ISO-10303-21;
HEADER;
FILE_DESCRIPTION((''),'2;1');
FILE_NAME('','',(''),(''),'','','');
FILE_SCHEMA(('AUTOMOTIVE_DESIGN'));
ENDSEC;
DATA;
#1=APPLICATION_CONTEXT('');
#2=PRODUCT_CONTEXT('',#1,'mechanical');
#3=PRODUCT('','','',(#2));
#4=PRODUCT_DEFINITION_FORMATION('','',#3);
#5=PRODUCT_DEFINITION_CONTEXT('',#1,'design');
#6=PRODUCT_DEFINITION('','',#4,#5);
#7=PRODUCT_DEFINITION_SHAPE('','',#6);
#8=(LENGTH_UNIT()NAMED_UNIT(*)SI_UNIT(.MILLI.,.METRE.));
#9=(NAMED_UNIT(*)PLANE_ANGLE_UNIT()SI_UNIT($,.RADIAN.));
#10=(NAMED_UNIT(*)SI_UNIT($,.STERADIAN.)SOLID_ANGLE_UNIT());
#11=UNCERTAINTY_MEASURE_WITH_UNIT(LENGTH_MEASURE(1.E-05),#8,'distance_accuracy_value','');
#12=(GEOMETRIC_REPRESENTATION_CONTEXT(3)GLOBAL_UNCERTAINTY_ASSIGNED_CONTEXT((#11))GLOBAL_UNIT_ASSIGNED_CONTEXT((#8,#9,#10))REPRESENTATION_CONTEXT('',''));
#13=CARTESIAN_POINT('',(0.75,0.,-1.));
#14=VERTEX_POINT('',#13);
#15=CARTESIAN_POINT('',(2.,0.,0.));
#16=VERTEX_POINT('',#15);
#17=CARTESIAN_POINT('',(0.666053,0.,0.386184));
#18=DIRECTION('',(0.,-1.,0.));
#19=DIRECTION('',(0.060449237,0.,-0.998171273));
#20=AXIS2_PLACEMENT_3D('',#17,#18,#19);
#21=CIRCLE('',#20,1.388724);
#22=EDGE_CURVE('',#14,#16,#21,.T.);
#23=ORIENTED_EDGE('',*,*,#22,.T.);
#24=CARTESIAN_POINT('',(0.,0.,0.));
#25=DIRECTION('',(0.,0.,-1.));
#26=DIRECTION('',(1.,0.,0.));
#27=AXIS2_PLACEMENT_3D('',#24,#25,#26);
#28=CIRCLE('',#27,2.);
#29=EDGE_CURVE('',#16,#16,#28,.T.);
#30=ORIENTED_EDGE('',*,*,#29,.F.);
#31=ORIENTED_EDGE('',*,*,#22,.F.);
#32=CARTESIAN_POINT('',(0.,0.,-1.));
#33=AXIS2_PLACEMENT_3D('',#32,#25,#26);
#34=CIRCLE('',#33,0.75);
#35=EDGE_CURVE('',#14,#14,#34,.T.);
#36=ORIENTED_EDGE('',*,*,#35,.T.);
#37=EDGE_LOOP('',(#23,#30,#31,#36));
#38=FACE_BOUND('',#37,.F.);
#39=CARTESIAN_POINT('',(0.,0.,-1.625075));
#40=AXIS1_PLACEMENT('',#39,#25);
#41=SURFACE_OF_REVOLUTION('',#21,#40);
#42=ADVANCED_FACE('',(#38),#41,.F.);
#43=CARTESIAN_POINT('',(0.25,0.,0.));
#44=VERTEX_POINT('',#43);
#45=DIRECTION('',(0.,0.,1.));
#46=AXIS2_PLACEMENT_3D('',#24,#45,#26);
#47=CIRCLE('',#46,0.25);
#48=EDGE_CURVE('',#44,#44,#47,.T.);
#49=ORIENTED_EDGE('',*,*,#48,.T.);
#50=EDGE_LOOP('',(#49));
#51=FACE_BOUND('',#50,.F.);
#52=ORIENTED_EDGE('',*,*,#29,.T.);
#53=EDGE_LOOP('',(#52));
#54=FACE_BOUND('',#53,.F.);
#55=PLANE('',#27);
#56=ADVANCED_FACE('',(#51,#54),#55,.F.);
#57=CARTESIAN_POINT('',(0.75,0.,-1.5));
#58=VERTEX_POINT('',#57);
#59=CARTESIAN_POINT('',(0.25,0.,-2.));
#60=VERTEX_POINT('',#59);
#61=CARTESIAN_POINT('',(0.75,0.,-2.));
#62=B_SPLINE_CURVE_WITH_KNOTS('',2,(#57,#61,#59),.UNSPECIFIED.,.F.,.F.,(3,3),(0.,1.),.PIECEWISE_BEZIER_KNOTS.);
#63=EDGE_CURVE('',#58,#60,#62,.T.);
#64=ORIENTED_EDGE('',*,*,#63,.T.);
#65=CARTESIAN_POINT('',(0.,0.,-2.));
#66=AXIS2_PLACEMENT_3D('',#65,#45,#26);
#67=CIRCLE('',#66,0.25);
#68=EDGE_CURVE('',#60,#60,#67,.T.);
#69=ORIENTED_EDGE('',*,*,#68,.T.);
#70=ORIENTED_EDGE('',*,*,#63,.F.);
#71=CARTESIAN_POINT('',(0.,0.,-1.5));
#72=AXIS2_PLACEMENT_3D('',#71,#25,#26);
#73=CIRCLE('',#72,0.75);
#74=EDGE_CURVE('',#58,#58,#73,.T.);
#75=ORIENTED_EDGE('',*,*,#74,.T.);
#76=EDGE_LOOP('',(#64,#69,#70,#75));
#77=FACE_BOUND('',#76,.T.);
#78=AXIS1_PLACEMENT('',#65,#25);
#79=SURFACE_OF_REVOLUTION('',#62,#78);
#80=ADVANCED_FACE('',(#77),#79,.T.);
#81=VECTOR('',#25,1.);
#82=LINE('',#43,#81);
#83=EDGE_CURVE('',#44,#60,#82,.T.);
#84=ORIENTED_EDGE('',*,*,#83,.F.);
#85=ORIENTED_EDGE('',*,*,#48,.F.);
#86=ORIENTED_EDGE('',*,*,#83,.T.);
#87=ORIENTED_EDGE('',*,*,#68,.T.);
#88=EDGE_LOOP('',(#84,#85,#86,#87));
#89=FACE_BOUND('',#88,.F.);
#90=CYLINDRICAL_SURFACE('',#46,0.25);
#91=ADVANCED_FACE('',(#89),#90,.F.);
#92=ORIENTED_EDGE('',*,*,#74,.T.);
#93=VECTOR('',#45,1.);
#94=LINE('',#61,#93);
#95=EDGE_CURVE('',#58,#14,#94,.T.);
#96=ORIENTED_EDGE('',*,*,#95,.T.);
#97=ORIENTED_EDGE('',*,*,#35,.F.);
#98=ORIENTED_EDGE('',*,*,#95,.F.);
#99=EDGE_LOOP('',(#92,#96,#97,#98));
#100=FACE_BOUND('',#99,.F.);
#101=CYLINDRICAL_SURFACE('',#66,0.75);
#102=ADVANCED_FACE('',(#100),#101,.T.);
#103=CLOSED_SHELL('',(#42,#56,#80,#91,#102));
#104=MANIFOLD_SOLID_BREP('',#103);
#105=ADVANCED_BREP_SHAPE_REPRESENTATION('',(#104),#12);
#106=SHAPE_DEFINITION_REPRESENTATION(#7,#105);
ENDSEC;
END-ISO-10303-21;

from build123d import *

# Parameters (mm, degrees)
F2_R     = 0.25
F3_DEPTH = 2.001


# Not quite as in the source:
# - a fillet or chamfer that OpenCascade refuses, or shapes differently, is made with other operations: its cross-section is extruded or revolved along the edge and cut away or added


with BuildPart() as f1:
    # F0 (on Front) → F1 (revolve)
    with BuildSketch(Plane.XZ):
        with BuildLine():
            Line((2, 0), (0, 0))
            Line((0, 0), (0, -2))
            Line((0, -2), (0.75, -2))
            Line((0.75, -2), (0.75, -1))
            ThreePointArc((0.75, -1), (1.533581534, -0.6982269175), (2, 0))
        make_face()
    revolve(axis=Axis((0, 0, -1.625075005), (0, 0, -1)))

    # F2 (on face) → F3 (cut, through all)
    with BuildSketch(Plane.XY):
        Circle(F2_R)
    extrude(amount=-F3_DEPTH, mode=Mode.SUBTRACT)

    # F4: fillet of radius 0.5 on 1 edges, made by hand

    # F4_s1 → F4_t2 (revolve, cut)
    with BuildSketch(Plane.XZ):
        with BuildLine():
            add(Edge.make_bspline(
                [(0.75, -1.5), (0.75, -2), (0.25, -2)],
                knots=[0, 0, 0, 1, 1, 1], degree=2, weights=[1, 1, 1]))
            Line((0.25, -2), (0.75, -2))
            Line((0.75, -2), (0.75, -1.5))
        make_face()
    revolve(axis=Axis((0, 0, -2), (0, 0, -1)), mode=Mode.SUBTRACT)


solid = f1.part
